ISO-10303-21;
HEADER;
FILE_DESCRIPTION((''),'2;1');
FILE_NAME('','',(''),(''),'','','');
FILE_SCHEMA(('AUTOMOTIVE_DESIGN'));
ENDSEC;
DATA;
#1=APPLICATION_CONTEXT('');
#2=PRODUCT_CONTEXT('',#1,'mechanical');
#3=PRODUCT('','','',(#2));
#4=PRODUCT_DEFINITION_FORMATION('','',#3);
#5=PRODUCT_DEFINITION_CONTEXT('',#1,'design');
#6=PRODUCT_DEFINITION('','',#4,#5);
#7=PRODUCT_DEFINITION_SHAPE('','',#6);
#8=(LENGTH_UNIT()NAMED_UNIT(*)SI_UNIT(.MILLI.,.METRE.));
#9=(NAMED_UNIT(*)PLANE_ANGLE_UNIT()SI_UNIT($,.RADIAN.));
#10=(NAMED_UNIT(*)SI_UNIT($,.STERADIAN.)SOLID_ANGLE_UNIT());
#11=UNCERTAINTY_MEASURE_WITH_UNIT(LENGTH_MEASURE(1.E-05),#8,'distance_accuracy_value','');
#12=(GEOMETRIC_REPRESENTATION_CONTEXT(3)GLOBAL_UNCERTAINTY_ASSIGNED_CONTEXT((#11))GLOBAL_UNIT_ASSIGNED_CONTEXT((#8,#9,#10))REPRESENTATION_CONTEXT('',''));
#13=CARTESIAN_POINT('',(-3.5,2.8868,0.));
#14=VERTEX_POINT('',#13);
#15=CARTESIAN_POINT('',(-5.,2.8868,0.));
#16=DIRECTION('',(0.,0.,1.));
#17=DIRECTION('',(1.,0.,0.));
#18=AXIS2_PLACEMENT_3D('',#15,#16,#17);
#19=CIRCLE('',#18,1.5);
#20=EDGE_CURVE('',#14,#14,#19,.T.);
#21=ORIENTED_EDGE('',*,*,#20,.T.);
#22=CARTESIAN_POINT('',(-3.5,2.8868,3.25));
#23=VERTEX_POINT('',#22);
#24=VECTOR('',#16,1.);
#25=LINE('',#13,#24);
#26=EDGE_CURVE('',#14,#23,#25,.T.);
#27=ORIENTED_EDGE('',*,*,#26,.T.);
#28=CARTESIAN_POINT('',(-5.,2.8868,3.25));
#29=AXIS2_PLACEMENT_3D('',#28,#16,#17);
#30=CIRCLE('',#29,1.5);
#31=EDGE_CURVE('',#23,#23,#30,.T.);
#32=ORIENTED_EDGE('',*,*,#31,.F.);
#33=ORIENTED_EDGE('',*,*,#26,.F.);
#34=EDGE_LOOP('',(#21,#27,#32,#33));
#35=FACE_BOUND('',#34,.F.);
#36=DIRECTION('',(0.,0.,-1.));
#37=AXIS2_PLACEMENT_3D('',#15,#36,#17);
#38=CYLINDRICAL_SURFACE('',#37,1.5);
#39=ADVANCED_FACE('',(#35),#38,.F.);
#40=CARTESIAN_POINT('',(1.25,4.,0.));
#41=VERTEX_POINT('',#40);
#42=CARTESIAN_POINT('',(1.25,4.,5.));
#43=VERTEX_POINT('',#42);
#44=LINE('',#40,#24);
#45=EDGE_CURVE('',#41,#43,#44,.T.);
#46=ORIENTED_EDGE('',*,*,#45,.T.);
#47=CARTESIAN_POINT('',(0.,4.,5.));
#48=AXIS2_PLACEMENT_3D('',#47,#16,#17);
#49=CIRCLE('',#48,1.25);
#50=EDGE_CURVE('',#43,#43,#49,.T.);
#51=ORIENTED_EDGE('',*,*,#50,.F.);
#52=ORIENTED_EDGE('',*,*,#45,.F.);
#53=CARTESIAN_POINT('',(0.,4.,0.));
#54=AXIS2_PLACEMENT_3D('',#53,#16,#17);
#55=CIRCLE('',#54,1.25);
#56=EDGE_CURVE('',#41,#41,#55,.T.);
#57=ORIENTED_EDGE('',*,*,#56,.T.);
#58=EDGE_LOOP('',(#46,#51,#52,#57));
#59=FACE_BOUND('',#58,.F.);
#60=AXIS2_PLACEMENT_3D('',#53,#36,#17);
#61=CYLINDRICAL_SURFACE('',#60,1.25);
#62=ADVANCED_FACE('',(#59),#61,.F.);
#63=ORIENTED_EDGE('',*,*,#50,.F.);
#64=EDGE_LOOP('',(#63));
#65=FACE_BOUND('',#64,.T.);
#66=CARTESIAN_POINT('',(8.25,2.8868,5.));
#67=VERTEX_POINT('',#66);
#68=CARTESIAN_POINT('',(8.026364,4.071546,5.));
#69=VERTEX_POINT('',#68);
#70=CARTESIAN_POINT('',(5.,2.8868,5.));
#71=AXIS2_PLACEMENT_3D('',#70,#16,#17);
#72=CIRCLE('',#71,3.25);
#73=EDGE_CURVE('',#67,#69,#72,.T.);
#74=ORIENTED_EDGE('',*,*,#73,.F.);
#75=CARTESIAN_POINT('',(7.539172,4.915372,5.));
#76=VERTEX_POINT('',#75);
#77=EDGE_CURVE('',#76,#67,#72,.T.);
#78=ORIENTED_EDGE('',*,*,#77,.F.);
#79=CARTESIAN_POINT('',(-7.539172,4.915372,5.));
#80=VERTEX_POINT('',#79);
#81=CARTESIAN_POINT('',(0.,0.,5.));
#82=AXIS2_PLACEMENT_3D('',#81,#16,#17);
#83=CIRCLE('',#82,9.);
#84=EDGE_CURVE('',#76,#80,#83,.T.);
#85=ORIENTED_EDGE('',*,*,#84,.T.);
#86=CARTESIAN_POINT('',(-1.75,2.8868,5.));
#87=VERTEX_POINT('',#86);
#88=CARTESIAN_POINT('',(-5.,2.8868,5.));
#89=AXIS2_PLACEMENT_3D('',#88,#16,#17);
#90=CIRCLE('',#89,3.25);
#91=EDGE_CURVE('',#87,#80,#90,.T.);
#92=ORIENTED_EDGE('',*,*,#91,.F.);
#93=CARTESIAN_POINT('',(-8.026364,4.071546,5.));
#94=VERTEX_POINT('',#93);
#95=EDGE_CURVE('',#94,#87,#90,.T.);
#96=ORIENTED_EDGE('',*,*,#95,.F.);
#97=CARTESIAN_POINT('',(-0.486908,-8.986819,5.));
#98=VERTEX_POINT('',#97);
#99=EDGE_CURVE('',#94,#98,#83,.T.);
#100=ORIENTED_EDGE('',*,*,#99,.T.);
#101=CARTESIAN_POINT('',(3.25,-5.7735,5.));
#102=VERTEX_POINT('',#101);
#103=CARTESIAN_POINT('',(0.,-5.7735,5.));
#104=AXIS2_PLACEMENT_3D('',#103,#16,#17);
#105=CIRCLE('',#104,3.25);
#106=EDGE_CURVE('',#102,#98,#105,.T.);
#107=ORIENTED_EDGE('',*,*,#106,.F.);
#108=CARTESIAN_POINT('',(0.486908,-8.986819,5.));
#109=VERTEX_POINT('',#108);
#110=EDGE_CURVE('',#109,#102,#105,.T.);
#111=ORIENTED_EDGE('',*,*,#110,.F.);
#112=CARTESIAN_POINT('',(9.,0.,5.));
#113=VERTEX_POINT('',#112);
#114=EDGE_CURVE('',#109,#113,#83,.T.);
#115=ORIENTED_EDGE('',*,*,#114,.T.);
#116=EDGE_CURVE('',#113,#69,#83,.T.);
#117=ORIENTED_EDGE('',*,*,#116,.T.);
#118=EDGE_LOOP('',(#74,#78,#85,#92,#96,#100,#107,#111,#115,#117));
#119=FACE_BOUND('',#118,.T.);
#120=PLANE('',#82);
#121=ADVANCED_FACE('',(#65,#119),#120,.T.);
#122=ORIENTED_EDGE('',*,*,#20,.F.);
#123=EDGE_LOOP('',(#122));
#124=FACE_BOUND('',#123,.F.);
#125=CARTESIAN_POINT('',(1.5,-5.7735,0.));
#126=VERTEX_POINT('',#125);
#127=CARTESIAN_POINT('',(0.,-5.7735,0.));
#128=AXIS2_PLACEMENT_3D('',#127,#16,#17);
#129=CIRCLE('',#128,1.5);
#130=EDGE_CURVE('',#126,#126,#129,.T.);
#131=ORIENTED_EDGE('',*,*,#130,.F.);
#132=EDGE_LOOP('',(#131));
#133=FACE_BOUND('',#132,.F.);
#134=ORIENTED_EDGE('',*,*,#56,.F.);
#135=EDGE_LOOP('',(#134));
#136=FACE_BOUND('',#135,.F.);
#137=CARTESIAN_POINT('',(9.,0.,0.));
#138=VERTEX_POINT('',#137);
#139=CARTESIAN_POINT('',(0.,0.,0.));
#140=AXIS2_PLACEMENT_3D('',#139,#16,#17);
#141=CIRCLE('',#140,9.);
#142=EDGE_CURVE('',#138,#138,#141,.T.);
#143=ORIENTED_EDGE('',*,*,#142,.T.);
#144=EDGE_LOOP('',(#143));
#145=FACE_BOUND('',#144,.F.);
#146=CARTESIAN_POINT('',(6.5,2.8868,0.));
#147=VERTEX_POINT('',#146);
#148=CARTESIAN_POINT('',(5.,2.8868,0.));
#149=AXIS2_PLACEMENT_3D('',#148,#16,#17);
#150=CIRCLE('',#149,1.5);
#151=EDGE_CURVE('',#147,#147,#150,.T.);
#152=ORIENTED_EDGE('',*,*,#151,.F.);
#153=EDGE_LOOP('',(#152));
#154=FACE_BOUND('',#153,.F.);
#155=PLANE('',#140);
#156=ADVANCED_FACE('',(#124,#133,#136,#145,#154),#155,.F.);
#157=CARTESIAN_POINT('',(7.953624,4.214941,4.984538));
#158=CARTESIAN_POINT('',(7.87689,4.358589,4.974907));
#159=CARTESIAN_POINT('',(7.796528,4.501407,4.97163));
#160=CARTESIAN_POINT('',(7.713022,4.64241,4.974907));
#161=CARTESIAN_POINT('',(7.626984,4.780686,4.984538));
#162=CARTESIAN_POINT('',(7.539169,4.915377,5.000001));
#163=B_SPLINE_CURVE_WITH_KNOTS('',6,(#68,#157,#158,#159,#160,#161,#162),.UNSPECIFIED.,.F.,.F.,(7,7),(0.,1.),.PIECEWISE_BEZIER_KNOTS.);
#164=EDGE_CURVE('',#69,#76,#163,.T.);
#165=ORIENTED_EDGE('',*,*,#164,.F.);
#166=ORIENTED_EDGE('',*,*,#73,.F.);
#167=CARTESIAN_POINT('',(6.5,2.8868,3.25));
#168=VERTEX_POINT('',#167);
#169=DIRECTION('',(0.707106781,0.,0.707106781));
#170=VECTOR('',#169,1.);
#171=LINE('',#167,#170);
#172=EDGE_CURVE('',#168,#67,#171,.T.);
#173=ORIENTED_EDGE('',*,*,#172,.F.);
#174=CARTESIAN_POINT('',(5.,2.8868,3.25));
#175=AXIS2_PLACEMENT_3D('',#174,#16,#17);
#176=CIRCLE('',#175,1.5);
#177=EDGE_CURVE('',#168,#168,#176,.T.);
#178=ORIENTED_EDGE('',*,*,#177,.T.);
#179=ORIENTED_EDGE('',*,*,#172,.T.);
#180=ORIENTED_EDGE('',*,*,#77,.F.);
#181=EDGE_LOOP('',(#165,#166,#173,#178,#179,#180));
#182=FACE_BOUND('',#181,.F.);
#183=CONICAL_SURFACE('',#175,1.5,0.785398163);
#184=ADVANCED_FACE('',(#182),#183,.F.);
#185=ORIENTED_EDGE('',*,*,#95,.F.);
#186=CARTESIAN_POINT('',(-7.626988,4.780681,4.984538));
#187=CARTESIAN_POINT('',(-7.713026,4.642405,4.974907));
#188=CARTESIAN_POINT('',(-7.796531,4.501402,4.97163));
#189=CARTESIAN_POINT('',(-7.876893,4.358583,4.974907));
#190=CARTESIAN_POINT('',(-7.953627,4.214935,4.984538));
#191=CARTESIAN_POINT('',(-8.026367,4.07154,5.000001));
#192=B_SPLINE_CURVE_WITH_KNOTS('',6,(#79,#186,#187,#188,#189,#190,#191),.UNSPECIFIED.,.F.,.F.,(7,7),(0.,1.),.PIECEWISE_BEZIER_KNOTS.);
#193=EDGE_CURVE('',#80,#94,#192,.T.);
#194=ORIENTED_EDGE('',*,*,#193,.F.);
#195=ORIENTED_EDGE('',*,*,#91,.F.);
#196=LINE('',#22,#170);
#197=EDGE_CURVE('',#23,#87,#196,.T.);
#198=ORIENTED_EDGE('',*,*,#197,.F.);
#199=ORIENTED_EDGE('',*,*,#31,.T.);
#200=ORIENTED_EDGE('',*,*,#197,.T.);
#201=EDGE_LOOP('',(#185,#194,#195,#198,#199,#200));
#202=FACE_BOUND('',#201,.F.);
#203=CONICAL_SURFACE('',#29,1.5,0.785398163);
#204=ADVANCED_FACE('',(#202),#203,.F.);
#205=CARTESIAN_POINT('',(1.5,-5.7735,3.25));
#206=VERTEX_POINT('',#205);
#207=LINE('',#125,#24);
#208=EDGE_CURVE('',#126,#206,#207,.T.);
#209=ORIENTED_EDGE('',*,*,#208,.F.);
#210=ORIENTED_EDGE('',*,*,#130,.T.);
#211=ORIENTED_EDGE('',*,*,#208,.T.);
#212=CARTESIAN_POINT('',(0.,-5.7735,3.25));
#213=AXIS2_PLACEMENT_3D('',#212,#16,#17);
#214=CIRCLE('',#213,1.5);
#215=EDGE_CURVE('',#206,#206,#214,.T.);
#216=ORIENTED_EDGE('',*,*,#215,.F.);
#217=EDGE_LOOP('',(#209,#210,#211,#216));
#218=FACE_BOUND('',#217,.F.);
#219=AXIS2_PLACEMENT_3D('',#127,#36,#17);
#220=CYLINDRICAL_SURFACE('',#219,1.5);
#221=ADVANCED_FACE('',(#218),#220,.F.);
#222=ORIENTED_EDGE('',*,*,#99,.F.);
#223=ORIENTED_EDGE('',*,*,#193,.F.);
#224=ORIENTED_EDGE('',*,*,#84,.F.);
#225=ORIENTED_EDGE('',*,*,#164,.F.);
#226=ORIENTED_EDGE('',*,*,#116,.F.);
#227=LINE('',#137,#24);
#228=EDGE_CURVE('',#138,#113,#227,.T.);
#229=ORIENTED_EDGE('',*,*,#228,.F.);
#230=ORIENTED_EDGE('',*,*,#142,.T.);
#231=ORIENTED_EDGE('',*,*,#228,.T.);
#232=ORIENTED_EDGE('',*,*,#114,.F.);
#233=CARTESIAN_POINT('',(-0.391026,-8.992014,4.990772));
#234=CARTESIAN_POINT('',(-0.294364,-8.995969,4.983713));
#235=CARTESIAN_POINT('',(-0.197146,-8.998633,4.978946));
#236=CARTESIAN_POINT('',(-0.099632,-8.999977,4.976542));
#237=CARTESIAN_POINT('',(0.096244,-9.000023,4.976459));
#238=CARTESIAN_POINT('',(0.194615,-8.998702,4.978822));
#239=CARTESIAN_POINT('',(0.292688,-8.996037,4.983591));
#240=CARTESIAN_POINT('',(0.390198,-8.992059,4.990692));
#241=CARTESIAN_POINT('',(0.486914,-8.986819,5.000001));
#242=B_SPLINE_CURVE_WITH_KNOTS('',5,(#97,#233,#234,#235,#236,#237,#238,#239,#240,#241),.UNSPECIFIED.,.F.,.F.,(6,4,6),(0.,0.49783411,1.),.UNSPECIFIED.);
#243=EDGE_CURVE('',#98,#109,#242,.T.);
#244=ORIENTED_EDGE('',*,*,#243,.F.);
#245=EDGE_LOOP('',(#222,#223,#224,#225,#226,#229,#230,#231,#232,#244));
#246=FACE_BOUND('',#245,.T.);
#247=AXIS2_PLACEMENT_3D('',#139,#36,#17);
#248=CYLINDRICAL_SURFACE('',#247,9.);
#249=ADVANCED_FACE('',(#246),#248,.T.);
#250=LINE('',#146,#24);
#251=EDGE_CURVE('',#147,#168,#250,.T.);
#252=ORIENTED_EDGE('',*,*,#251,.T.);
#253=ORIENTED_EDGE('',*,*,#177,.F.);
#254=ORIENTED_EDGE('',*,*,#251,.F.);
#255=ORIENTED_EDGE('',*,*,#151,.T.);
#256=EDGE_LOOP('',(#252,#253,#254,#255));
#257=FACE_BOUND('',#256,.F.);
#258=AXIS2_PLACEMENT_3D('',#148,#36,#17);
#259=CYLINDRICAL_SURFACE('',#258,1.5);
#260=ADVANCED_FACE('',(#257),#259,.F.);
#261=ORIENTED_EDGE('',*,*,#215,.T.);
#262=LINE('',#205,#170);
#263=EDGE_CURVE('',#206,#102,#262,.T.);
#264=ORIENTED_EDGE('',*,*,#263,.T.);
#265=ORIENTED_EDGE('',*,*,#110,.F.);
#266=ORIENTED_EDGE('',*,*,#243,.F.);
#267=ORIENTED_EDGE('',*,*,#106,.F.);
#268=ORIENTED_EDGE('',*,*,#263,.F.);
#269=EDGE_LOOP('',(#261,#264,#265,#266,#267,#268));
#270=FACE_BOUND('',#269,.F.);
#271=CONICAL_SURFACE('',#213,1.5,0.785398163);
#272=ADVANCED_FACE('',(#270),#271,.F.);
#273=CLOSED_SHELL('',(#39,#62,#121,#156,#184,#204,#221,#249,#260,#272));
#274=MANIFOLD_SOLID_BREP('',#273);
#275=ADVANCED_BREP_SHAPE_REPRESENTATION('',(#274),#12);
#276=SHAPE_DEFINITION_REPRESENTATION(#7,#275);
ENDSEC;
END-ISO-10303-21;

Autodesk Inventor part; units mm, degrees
ref_plane "YZ Plane" through (0, 0, 0) normal (1, 0, 0) x (0, 1, 0)
ref_plane "XZ Plane" through (0, 0, 0) normal (0, 1, 0) x (-1, 0, 0)
ref_plane "XY Plane" through (0, 0, 0) normal (0, 0, 1) x (1, 0, 0)
sketch "スケッチ1" plane through (0, 0, 0) normal (0, 0, 1) x (1, 0, 0)
  circle A0 centre (0, 0) radius 9
  line L0 (-5, 2.8868) -> (5, 2.8868) construction
  line L1 (5, 2.8868) -> (0, -5.7735) construction
  line L2 (0, -5.7735) -> (-5, 2.8868) construction
  circle A1 centre (-5, 2.8868) radius 1.5
  circle A2 centre (5, 2.8868) radius 1.5
  circle A3 centre (0, -5.7735) radius 1.5
  circle A4 centre (0, 4) radius 1.25
  line L3 (0, 0) -> (0, 4) construction
  dimension "d0" = 18
  dimension "d1" = 10
  dimension "d2" = 3
  dimension "d3" = 3
  dimension "d4" = 3
  dimension "d5" = 2.5
  dimension "d6" = 4
extrude "押し出し1" add sketch "スケッチ1" along normal blind 5
chamfer "面取り1" distance 1.75 angle 45 3 edges at (-6.5, 2.8868, 5) (3.5, 2.8868, 5) (-1.5, -5.7735, 5)
properties part number "横回転最終段カム"
